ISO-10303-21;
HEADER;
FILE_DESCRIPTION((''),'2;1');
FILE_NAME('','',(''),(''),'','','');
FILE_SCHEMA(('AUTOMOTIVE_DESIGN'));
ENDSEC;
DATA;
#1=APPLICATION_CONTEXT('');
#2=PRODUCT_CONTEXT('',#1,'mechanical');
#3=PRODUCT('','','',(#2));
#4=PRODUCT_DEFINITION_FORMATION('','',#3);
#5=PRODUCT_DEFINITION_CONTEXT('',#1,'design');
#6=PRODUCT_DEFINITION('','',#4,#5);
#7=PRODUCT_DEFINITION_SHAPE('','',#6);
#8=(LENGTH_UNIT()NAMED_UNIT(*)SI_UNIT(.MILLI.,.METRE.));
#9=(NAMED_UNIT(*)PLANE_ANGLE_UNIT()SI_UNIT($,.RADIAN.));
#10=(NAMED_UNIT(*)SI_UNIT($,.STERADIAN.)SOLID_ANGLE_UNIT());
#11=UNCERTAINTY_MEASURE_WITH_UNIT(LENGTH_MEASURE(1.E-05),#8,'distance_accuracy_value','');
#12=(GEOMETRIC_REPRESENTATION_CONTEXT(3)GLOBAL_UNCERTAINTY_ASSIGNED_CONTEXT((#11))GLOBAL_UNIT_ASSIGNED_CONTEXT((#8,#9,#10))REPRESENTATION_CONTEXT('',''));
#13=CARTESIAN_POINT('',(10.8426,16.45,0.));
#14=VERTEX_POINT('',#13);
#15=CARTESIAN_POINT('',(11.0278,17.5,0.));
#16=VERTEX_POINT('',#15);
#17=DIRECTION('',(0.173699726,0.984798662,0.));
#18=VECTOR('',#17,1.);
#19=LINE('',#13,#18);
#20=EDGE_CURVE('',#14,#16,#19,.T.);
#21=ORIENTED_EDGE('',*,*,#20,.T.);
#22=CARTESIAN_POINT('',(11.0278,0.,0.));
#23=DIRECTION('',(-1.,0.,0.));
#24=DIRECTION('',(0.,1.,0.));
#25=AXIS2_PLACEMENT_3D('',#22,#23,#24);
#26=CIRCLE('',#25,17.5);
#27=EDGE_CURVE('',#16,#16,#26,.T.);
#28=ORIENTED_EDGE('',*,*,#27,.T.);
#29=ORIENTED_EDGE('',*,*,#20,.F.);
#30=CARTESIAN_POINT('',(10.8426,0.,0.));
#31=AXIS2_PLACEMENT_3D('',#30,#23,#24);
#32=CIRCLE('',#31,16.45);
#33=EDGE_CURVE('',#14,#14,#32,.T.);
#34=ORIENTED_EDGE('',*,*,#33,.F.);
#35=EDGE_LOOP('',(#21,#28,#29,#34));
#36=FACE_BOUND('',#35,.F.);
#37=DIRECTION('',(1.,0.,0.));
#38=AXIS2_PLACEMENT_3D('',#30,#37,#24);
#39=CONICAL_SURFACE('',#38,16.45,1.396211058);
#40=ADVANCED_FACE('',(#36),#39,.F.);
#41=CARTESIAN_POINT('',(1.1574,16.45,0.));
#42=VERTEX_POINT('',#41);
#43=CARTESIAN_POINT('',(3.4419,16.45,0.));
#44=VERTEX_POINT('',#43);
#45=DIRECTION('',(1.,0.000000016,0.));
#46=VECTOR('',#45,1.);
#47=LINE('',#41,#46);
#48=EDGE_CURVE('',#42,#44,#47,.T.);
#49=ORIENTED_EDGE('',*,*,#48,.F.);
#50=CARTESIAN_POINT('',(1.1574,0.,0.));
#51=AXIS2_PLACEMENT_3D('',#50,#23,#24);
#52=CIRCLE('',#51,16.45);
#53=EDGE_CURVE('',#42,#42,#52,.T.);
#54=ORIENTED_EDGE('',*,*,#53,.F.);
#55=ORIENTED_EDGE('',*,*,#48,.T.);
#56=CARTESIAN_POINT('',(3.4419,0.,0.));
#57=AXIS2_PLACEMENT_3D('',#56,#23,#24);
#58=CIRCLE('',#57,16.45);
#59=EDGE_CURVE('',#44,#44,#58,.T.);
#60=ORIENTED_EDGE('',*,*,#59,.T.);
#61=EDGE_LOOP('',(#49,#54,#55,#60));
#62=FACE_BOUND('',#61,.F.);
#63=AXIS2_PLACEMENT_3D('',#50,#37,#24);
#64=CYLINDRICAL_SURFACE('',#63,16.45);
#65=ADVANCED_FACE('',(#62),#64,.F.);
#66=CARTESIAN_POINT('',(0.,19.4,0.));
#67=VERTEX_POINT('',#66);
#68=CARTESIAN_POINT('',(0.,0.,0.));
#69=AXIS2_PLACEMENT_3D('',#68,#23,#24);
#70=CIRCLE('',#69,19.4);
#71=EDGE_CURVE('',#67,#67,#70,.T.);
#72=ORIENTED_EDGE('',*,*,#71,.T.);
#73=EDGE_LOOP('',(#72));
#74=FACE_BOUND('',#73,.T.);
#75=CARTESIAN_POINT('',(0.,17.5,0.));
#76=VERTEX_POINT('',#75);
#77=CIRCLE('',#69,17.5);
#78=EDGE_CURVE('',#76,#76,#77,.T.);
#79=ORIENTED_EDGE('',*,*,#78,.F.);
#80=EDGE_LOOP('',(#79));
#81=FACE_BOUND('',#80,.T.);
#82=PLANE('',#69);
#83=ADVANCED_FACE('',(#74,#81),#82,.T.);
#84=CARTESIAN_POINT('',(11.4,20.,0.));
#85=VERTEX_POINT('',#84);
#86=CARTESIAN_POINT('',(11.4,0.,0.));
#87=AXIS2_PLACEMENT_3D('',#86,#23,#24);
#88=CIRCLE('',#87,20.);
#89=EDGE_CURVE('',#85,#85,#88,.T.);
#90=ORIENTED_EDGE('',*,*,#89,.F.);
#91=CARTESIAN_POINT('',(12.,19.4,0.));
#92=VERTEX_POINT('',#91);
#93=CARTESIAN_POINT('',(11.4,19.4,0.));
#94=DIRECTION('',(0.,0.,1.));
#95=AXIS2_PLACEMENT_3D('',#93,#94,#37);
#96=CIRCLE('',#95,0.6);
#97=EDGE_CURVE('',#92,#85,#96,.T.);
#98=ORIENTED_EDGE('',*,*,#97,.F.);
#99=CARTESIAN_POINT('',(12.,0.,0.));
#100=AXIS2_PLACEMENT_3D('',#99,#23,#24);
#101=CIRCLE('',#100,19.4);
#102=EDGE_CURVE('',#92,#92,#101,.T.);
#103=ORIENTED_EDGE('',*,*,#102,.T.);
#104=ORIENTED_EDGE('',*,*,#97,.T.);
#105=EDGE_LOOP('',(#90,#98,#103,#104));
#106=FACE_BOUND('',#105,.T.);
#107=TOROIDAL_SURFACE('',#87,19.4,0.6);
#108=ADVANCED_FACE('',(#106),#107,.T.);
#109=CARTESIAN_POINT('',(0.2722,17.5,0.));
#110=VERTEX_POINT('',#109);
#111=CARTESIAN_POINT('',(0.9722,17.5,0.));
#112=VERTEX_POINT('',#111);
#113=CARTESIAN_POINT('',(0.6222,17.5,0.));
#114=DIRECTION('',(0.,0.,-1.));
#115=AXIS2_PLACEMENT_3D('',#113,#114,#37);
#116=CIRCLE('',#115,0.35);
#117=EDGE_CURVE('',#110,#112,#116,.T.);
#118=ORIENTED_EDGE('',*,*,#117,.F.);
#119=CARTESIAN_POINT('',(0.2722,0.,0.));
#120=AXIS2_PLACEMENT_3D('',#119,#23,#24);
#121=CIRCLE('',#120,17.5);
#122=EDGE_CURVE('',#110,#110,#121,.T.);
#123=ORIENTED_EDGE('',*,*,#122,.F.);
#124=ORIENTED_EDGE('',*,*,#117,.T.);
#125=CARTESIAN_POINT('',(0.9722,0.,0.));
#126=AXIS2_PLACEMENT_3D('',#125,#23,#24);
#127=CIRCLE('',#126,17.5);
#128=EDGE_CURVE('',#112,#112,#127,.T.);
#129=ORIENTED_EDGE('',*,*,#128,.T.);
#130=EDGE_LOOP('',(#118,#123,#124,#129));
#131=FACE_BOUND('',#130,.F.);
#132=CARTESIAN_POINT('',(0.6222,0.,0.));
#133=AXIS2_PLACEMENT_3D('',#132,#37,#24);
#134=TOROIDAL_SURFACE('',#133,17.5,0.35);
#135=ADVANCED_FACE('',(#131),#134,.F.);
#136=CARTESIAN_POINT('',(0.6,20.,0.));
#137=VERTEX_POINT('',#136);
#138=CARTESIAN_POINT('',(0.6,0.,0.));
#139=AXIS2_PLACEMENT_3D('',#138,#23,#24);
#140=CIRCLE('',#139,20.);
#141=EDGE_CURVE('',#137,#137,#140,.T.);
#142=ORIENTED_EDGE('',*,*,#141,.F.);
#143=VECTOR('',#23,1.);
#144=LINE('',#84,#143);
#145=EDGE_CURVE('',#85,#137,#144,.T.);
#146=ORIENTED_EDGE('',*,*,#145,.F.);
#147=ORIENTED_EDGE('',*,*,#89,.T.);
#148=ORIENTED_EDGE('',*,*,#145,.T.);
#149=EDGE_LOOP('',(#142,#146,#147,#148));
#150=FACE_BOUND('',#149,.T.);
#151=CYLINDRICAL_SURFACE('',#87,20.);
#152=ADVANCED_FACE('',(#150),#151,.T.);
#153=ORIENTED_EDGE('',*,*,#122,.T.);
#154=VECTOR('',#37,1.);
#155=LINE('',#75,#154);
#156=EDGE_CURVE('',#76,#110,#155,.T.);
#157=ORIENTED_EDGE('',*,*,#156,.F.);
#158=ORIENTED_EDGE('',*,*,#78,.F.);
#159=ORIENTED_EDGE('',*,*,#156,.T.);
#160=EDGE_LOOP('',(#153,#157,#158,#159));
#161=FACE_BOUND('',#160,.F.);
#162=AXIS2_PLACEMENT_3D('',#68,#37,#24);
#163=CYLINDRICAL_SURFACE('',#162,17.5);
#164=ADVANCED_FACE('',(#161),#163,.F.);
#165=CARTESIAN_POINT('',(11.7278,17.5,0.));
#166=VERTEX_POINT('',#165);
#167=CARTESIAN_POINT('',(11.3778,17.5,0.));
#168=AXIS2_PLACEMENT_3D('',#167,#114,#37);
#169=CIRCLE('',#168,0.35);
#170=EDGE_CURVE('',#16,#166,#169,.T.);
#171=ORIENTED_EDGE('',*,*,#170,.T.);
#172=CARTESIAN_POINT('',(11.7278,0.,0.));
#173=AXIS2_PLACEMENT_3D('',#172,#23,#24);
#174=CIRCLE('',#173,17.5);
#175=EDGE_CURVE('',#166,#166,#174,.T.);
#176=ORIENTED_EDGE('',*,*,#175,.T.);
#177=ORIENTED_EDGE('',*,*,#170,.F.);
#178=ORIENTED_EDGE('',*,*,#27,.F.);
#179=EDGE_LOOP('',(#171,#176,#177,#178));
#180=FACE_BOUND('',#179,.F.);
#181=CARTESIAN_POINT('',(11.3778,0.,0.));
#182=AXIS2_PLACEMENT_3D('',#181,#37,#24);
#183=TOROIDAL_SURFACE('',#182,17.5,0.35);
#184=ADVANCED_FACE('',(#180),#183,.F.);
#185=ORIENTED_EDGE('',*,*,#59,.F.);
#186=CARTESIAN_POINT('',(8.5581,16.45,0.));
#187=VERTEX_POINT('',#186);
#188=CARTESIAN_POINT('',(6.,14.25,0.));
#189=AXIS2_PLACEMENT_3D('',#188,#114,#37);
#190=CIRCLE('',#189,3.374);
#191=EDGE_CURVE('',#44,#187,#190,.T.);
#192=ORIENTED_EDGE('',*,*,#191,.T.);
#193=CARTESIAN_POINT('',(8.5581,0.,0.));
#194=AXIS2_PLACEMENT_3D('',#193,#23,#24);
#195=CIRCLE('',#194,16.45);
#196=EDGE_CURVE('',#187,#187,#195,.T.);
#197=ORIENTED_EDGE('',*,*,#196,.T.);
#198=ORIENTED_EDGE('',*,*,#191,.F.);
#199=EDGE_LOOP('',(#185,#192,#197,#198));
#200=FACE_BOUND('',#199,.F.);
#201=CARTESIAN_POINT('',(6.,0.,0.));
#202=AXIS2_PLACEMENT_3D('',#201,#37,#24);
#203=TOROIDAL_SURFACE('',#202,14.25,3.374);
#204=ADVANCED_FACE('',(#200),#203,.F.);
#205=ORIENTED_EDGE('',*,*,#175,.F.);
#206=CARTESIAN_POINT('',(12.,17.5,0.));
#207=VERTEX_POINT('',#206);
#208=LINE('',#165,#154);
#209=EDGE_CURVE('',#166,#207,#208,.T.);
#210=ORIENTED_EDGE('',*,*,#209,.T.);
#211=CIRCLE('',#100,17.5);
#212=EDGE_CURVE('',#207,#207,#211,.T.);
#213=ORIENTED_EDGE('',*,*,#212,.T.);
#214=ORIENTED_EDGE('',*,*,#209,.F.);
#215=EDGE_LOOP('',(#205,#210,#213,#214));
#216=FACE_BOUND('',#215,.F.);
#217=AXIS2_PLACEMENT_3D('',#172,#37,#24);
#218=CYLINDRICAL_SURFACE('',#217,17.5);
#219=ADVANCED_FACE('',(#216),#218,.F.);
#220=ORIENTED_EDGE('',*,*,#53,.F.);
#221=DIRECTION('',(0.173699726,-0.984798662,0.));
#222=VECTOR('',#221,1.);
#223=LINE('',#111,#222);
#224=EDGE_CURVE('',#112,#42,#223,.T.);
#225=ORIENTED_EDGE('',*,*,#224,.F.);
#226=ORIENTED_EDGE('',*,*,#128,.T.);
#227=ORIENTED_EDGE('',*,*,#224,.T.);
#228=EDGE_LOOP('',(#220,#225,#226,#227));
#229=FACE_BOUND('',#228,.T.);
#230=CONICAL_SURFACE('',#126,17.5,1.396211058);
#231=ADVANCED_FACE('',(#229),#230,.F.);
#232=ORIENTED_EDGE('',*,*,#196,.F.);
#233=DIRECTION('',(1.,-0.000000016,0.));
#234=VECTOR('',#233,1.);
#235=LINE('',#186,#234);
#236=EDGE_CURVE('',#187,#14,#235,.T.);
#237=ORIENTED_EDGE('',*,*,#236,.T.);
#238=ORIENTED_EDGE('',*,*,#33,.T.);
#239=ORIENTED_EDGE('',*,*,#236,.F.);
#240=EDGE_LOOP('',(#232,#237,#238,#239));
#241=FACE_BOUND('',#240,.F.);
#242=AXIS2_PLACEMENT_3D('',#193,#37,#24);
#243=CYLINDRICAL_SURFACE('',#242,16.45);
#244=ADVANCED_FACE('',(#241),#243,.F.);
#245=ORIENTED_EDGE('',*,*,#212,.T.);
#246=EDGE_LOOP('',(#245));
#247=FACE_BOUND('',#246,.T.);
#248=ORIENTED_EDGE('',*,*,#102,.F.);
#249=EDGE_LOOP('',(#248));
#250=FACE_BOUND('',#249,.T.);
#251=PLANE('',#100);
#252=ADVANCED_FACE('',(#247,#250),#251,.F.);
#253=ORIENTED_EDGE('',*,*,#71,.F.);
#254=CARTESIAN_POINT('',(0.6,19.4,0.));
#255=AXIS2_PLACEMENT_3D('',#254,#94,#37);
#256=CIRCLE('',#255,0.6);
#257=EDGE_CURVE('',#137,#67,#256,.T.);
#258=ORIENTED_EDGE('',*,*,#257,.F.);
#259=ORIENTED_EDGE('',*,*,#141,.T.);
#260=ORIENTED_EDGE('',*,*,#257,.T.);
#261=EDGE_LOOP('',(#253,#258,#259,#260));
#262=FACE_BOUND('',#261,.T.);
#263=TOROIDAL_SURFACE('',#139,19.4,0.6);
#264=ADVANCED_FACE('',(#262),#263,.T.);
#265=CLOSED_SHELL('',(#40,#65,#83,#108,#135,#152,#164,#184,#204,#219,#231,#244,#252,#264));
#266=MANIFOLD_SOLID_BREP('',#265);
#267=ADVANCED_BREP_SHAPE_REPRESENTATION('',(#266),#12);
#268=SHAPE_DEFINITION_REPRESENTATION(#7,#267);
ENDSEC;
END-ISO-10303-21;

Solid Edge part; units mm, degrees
sketch "Sketch1" plane through (0, 0, 0) normal (0, 0, 1) x (1, 0, 0)
  line L0 (0, 19.4) -> (0, 17.5)
  line L1 (0, 17.5) -> (0.2722, 17.5)
  arc A0 (0.2722, 17.5) -> (0.9722, 17.5) centre (0.6222, 17.5) cw
  line L2 (0.9722, 17.5) -> (1.1574, 16.45)
  line L3 (1.1574, 16.45) -> (3.4419, 16.45)
  arc A1 (3.4419, 16.45) -> (8.5581, 16.45) centre (6, 14.25) cw
  line L4 (8.5581, 16.45) -> (10.8426, 16.45)
  line L5 (10.8426, 16.45) -> (11.0278, 17.5)
  arc A2 (11.0278, 17.5) -> (11.7278, 17.5) centre (11.3778, 17.5) cw
  line L6 (11.7278, 17.5) -> (12, 17.5)
  line L7 (12, 17.5) -> (12, 19.4)
  arc A3 (12, 19.4) -> (11.4, 20) centre (11.4, 19.4) ccw
  line L8 (11.4, 20) -> (0.6, 20)
  arc A4 (0.6, 20) -> (0, 19.4) centre (0.6, 19.4) ccw
revolve "RevolvedProtrusion1" add sketch "Sketch1" angle 360 about axis through (11.4, 0, 0) along (-1, 0, 0)
